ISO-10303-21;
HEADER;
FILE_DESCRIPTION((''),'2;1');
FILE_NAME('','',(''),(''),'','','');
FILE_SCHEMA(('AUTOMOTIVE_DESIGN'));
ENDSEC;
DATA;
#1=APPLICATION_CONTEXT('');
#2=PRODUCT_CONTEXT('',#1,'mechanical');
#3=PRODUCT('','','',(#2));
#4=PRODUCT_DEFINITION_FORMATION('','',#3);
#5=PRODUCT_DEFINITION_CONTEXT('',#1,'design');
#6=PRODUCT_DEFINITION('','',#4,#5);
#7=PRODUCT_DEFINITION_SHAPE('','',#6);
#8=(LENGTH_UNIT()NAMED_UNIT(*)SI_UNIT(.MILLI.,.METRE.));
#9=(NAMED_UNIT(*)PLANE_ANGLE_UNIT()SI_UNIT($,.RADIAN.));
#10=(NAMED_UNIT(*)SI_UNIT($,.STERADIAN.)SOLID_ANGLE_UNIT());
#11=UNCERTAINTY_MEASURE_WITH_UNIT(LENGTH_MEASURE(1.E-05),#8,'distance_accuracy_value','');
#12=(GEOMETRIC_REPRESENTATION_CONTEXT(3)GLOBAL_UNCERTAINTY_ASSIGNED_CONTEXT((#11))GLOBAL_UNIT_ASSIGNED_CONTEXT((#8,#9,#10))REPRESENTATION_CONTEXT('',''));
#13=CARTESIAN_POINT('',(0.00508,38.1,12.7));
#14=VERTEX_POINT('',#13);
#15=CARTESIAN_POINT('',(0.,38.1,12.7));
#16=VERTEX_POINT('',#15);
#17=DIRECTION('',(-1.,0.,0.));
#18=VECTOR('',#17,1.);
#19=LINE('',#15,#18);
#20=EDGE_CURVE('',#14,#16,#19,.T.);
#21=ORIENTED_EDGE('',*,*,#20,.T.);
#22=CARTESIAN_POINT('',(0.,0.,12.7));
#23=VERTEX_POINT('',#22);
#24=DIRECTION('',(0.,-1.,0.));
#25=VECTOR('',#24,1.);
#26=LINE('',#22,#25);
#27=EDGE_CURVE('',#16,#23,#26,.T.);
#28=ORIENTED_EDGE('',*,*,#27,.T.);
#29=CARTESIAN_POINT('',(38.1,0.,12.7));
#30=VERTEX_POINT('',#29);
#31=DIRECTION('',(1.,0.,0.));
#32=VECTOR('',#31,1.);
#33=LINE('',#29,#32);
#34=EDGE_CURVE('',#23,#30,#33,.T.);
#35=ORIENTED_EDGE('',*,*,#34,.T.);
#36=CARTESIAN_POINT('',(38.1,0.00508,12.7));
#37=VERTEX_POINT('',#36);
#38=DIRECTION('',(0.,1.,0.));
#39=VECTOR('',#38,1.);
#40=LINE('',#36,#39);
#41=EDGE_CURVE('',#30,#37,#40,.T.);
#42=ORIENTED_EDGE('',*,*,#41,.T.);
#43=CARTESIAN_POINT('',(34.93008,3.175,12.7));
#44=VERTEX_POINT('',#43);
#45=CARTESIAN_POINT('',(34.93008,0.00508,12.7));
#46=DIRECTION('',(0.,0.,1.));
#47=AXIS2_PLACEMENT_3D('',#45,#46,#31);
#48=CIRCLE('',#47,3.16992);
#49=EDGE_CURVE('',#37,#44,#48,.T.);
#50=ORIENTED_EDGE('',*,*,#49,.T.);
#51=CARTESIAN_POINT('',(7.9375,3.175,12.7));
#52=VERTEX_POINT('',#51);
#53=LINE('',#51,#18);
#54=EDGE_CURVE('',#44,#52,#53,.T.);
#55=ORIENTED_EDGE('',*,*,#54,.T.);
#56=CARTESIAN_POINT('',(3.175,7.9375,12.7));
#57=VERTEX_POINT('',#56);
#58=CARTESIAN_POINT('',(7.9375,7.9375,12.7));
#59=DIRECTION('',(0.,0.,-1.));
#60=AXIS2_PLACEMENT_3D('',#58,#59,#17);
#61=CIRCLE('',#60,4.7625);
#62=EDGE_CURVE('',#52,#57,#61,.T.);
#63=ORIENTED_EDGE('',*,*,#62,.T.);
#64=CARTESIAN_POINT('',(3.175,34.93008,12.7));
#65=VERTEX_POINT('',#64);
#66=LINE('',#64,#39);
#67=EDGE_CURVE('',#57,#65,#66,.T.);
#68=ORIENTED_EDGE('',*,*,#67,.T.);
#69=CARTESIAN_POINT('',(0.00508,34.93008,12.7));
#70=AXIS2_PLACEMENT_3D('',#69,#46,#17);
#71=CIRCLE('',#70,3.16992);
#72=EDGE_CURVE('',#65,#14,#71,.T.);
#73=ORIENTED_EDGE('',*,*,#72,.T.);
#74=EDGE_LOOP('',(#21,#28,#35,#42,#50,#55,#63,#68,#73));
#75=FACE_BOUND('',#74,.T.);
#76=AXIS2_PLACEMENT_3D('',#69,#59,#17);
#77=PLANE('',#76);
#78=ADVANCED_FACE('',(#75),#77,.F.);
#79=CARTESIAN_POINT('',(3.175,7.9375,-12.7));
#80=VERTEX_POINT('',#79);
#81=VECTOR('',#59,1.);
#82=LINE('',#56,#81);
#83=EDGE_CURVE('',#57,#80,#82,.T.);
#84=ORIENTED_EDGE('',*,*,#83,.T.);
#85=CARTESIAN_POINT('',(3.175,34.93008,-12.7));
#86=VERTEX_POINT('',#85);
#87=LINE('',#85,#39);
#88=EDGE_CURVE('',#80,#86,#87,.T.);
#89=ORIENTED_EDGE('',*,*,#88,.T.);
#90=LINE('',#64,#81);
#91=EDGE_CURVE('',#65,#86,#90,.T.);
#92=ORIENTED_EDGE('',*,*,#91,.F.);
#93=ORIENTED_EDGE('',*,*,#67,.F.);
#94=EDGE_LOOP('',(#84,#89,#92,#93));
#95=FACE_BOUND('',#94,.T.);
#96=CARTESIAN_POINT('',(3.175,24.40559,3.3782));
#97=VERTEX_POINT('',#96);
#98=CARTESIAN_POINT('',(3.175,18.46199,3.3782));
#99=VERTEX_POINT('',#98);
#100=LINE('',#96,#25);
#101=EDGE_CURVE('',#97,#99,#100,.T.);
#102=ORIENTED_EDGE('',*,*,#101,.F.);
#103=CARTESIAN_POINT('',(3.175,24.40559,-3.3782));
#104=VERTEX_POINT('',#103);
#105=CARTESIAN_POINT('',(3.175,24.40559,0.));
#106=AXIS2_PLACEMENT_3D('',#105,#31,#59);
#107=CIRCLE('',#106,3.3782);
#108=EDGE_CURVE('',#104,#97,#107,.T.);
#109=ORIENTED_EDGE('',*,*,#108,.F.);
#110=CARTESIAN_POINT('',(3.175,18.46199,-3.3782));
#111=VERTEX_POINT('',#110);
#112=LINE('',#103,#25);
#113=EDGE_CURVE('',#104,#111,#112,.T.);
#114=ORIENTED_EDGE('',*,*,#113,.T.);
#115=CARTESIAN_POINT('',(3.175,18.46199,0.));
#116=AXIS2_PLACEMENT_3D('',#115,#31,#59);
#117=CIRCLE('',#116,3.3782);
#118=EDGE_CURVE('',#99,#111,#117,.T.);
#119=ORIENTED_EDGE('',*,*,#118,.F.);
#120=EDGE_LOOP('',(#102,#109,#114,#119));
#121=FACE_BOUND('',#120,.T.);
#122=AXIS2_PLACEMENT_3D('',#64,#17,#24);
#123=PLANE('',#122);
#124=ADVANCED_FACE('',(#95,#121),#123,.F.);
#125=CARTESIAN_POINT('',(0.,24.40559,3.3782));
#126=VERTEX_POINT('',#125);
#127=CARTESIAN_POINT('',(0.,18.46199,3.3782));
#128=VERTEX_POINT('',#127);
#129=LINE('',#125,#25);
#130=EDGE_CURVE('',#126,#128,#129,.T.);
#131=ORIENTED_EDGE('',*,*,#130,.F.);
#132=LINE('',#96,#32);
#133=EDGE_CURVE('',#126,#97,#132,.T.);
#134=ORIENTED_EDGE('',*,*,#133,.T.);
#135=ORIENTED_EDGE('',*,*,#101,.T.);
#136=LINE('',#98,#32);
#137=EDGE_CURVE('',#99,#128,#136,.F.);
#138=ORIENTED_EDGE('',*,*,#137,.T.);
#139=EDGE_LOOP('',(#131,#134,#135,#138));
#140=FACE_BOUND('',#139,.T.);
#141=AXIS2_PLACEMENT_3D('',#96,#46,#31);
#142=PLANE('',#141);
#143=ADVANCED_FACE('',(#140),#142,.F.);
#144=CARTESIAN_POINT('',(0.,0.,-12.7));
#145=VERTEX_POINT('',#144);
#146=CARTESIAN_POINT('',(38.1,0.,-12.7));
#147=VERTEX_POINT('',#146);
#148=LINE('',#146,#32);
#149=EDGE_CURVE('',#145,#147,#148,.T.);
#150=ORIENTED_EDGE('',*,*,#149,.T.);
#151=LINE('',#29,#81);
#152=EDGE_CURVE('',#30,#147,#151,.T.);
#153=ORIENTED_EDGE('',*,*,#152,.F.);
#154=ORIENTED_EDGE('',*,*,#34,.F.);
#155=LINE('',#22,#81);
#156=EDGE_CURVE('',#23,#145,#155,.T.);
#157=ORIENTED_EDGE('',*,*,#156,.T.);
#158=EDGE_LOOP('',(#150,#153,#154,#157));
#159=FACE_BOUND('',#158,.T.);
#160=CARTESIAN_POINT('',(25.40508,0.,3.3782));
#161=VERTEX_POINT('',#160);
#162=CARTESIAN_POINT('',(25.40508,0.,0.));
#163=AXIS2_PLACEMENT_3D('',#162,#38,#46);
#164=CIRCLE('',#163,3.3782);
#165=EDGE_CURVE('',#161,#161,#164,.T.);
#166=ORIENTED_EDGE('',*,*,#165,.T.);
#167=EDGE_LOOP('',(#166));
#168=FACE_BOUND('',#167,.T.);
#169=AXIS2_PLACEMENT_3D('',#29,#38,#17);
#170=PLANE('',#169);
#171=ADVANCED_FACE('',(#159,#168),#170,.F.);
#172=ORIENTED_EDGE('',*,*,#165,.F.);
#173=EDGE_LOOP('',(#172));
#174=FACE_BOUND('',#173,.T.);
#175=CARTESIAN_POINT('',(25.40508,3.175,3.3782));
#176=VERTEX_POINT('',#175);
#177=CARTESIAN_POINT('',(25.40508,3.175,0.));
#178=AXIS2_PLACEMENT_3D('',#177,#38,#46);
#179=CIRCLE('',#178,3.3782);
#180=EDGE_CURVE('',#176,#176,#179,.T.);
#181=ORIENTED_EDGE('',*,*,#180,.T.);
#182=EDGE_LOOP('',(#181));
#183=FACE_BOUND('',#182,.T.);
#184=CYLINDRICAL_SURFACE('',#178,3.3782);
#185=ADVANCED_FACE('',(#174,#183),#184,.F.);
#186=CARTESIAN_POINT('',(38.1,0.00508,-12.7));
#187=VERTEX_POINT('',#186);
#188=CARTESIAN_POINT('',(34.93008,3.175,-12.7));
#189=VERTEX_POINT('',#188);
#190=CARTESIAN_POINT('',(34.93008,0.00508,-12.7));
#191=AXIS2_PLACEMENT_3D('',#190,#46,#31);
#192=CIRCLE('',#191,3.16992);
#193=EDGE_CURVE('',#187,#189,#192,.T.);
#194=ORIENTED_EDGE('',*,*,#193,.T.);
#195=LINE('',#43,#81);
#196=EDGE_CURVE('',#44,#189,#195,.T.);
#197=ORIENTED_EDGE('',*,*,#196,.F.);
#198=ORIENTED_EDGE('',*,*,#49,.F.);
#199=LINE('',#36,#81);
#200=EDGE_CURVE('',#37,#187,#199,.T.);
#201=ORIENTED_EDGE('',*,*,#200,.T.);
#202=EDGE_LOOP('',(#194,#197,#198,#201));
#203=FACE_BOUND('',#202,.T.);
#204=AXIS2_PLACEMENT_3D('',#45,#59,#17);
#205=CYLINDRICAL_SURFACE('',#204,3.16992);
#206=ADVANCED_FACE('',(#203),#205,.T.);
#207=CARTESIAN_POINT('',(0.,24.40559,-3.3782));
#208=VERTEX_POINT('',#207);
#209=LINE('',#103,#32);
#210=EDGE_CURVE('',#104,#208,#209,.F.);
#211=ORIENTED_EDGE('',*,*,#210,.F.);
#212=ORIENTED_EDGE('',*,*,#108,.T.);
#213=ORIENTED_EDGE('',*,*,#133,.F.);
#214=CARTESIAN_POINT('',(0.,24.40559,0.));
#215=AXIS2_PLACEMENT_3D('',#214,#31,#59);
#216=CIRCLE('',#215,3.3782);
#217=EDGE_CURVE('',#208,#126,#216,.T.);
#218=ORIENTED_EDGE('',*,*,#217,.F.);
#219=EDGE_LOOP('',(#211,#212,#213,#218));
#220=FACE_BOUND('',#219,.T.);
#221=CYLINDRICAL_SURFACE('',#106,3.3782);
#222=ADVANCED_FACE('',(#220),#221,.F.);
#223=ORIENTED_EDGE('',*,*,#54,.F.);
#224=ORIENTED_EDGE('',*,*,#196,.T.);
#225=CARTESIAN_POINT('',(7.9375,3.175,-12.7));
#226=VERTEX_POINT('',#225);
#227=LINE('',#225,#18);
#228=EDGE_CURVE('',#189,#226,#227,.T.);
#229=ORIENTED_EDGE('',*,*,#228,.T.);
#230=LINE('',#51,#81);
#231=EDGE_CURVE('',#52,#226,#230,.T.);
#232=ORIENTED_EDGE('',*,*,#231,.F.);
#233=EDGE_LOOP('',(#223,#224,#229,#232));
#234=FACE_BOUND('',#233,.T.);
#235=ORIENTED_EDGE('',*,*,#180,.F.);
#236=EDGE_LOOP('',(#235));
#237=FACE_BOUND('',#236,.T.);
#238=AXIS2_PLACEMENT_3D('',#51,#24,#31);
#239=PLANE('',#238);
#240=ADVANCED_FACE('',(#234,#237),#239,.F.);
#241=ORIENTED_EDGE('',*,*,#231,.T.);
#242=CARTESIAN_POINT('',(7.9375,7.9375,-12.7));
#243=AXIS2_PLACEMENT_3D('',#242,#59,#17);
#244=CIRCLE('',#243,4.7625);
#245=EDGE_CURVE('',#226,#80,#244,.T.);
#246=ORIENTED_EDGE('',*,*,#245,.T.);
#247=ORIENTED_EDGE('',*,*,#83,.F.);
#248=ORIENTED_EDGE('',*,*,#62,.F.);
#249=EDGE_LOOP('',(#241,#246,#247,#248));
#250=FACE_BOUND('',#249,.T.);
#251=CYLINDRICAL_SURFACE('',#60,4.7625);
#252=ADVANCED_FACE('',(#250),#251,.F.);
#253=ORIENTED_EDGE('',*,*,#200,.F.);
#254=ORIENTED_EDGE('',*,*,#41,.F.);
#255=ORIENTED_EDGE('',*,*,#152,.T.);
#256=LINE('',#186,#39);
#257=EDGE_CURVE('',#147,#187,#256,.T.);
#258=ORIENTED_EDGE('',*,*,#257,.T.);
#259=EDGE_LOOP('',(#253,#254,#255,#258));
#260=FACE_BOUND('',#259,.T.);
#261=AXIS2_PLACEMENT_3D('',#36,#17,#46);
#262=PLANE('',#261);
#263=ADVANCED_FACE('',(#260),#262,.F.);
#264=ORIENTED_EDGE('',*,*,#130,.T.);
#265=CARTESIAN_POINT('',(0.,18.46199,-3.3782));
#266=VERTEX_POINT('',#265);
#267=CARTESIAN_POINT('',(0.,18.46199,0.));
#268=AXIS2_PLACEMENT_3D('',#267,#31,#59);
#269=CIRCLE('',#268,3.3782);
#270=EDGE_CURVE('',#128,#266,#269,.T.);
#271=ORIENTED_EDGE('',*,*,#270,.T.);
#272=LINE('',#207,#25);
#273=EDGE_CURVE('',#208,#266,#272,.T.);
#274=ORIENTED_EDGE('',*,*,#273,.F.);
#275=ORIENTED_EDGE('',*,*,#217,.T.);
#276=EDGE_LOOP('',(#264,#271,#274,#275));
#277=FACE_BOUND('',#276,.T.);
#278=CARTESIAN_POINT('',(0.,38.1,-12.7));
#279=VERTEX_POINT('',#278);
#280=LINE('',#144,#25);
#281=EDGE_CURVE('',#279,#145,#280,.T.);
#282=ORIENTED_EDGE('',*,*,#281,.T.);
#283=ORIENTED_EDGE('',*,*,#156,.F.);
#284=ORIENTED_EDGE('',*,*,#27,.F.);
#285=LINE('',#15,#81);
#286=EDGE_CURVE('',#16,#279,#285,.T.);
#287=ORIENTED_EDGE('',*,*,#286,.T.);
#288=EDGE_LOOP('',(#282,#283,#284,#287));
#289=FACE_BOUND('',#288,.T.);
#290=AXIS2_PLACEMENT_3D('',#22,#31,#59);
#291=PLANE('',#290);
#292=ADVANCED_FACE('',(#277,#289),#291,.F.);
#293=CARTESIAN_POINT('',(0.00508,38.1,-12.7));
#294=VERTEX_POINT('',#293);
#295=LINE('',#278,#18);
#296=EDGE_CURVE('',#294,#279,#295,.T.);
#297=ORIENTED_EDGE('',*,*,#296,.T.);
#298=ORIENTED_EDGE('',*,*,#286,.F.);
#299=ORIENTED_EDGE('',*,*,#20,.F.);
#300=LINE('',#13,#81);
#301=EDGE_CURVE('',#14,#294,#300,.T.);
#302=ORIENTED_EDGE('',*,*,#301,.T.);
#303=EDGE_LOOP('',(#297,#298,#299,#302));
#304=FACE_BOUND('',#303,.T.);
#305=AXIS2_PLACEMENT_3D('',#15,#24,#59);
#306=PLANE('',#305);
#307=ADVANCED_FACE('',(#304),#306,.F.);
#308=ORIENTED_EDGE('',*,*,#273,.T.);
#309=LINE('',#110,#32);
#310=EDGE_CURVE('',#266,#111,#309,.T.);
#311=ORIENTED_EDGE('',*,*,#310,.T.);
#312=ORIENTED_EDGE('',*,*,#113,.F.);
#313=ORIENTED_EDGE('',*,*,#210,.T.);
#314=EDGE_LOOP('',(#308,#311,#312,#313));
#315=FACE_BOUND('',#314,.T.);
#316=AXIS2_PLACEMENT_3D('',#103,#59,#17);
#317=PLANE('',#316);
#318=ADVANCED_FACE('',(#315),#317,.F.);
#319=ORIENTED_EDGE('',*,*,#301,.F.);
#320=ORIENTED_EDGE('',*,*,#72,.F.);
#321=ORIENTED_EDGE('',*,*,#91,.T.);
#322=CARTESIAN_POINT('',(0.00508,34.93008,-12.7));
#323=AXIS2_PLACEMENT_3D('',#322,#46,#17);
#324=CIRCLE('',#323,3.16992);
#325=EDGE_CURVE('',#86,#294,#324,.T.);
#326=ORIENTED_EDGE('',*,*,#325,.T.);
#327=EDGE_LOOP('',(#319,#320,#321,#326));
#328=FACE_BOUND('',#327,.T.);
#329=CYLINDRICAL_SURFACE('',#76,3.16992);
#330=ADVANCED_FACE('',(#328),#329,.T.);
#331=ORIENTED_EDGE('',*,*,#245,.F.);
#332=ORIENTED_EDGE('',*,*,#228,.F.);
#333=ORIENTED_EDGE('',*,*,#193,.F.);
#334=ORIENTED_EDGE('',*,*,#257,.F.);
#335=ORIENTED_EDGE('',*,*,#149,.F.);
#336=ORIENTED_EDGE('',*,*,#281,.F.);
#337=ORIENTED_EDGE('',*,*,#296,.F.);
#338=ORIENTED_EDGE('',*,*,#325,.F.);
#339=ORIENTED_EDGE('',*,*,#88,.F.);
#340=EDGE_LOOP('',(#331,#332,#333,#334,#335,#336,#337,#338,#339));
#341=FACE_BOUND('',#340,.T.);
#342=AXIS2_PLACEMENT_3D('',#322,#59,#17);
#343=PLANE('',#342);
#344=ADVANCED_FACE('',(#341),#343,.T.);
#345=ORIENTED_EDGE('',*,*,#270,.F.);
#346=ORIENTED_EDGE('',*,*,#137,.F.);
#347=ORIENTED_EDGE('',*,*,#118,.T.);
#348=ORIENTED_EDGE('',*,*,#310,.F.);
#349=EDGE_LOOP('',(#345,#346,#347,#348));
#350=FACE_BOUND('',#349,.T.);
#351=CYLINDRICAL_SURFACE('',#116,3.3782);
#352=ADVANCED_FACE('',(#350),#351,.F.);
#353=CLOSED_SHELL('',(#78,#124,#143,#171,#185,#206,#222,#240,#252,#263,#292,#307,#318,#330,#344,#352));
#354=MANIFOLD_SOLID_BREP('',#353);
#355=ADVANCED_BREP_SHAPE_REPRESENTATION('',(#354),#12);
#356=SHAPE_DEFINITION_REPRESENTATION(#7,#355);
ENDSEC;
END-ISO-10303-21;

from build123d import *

# Parameters (mm, degrees)
BASESTEELANGLE_DEPTH        = 12.7
F_1_4_CLEARANCE_HOLE1_D     = 6.7564
F_1_4_CLEARANCE_SLOT1_DEPTH = 3.175


# Read off the part's stored shape, not the designer's step: 1/4 Clearance Slot1
with BuildPart() as part:
    # Sketch1 → BaseSteelAngle (new, symmetric)
    with BuildSketch(Plane.XY):
        with BuildLine():
            Line((0, 0), (0, 38.1))
            Line((0, 38.1), (0.00508, 38.1))
            ThreePointArc((0.00508, 38.1), (2.246551928, 37.171551928), (3.175, 34.93008))
            Line((3.175, 34.93008), (3.175, 7.9375))
            ThreePointArc((3.175, 7.9375), (4.569903955, 4.569903955), (7.9375, 3.175))
            Line((7.9375, 3.175), (34.93008, 3.175))
            ThreePointArc((34.93008, 3.175), (37.171551928, 2.246551928), (38.1, 0.00508))
            Line((38.1, 0.00508), (38.1, 0))
            Line((38.1, 0), (0, 0))
        make_face()
    extrude(amount=BASESTEELANGLE_DEPTH, both=True)

    # 1/4 Clearance Hole1 (through all)
    with Locations(Plane(origin=(25.40508, 3.175, 0), x_dir=(1, 0, 0), z_dir=(0, 1, 0))):
        with Locations((0, 0)):
            Hole(F_1_4_CLEARANCE_HOLE1_D / 2)

    # 1/4 Clearance Slot1 outline → 1/4 Clearance Slot1 (cut)
    with BuildSketch(Plane.YZ):
        with BuildLine():
            Line((24.40559, 3.3782), (18.46199, 3.3782))
            ThreePointArc((18.46199, 3.3782), (15.08379, 0), (18.46199, -3.3782))
            Line((18.46199, -3.3782), (24.40559, -3.3782))
            ThreePointArc((24.40559, -3.3782), (27.78379, 0), (24.40559, 3.3782))
        make_face()
    extrude(amount=F_1_4_CLEARANCE_SLOT1_DEPTH, mode=Mode.SUBTRACT)


solid = part.part
